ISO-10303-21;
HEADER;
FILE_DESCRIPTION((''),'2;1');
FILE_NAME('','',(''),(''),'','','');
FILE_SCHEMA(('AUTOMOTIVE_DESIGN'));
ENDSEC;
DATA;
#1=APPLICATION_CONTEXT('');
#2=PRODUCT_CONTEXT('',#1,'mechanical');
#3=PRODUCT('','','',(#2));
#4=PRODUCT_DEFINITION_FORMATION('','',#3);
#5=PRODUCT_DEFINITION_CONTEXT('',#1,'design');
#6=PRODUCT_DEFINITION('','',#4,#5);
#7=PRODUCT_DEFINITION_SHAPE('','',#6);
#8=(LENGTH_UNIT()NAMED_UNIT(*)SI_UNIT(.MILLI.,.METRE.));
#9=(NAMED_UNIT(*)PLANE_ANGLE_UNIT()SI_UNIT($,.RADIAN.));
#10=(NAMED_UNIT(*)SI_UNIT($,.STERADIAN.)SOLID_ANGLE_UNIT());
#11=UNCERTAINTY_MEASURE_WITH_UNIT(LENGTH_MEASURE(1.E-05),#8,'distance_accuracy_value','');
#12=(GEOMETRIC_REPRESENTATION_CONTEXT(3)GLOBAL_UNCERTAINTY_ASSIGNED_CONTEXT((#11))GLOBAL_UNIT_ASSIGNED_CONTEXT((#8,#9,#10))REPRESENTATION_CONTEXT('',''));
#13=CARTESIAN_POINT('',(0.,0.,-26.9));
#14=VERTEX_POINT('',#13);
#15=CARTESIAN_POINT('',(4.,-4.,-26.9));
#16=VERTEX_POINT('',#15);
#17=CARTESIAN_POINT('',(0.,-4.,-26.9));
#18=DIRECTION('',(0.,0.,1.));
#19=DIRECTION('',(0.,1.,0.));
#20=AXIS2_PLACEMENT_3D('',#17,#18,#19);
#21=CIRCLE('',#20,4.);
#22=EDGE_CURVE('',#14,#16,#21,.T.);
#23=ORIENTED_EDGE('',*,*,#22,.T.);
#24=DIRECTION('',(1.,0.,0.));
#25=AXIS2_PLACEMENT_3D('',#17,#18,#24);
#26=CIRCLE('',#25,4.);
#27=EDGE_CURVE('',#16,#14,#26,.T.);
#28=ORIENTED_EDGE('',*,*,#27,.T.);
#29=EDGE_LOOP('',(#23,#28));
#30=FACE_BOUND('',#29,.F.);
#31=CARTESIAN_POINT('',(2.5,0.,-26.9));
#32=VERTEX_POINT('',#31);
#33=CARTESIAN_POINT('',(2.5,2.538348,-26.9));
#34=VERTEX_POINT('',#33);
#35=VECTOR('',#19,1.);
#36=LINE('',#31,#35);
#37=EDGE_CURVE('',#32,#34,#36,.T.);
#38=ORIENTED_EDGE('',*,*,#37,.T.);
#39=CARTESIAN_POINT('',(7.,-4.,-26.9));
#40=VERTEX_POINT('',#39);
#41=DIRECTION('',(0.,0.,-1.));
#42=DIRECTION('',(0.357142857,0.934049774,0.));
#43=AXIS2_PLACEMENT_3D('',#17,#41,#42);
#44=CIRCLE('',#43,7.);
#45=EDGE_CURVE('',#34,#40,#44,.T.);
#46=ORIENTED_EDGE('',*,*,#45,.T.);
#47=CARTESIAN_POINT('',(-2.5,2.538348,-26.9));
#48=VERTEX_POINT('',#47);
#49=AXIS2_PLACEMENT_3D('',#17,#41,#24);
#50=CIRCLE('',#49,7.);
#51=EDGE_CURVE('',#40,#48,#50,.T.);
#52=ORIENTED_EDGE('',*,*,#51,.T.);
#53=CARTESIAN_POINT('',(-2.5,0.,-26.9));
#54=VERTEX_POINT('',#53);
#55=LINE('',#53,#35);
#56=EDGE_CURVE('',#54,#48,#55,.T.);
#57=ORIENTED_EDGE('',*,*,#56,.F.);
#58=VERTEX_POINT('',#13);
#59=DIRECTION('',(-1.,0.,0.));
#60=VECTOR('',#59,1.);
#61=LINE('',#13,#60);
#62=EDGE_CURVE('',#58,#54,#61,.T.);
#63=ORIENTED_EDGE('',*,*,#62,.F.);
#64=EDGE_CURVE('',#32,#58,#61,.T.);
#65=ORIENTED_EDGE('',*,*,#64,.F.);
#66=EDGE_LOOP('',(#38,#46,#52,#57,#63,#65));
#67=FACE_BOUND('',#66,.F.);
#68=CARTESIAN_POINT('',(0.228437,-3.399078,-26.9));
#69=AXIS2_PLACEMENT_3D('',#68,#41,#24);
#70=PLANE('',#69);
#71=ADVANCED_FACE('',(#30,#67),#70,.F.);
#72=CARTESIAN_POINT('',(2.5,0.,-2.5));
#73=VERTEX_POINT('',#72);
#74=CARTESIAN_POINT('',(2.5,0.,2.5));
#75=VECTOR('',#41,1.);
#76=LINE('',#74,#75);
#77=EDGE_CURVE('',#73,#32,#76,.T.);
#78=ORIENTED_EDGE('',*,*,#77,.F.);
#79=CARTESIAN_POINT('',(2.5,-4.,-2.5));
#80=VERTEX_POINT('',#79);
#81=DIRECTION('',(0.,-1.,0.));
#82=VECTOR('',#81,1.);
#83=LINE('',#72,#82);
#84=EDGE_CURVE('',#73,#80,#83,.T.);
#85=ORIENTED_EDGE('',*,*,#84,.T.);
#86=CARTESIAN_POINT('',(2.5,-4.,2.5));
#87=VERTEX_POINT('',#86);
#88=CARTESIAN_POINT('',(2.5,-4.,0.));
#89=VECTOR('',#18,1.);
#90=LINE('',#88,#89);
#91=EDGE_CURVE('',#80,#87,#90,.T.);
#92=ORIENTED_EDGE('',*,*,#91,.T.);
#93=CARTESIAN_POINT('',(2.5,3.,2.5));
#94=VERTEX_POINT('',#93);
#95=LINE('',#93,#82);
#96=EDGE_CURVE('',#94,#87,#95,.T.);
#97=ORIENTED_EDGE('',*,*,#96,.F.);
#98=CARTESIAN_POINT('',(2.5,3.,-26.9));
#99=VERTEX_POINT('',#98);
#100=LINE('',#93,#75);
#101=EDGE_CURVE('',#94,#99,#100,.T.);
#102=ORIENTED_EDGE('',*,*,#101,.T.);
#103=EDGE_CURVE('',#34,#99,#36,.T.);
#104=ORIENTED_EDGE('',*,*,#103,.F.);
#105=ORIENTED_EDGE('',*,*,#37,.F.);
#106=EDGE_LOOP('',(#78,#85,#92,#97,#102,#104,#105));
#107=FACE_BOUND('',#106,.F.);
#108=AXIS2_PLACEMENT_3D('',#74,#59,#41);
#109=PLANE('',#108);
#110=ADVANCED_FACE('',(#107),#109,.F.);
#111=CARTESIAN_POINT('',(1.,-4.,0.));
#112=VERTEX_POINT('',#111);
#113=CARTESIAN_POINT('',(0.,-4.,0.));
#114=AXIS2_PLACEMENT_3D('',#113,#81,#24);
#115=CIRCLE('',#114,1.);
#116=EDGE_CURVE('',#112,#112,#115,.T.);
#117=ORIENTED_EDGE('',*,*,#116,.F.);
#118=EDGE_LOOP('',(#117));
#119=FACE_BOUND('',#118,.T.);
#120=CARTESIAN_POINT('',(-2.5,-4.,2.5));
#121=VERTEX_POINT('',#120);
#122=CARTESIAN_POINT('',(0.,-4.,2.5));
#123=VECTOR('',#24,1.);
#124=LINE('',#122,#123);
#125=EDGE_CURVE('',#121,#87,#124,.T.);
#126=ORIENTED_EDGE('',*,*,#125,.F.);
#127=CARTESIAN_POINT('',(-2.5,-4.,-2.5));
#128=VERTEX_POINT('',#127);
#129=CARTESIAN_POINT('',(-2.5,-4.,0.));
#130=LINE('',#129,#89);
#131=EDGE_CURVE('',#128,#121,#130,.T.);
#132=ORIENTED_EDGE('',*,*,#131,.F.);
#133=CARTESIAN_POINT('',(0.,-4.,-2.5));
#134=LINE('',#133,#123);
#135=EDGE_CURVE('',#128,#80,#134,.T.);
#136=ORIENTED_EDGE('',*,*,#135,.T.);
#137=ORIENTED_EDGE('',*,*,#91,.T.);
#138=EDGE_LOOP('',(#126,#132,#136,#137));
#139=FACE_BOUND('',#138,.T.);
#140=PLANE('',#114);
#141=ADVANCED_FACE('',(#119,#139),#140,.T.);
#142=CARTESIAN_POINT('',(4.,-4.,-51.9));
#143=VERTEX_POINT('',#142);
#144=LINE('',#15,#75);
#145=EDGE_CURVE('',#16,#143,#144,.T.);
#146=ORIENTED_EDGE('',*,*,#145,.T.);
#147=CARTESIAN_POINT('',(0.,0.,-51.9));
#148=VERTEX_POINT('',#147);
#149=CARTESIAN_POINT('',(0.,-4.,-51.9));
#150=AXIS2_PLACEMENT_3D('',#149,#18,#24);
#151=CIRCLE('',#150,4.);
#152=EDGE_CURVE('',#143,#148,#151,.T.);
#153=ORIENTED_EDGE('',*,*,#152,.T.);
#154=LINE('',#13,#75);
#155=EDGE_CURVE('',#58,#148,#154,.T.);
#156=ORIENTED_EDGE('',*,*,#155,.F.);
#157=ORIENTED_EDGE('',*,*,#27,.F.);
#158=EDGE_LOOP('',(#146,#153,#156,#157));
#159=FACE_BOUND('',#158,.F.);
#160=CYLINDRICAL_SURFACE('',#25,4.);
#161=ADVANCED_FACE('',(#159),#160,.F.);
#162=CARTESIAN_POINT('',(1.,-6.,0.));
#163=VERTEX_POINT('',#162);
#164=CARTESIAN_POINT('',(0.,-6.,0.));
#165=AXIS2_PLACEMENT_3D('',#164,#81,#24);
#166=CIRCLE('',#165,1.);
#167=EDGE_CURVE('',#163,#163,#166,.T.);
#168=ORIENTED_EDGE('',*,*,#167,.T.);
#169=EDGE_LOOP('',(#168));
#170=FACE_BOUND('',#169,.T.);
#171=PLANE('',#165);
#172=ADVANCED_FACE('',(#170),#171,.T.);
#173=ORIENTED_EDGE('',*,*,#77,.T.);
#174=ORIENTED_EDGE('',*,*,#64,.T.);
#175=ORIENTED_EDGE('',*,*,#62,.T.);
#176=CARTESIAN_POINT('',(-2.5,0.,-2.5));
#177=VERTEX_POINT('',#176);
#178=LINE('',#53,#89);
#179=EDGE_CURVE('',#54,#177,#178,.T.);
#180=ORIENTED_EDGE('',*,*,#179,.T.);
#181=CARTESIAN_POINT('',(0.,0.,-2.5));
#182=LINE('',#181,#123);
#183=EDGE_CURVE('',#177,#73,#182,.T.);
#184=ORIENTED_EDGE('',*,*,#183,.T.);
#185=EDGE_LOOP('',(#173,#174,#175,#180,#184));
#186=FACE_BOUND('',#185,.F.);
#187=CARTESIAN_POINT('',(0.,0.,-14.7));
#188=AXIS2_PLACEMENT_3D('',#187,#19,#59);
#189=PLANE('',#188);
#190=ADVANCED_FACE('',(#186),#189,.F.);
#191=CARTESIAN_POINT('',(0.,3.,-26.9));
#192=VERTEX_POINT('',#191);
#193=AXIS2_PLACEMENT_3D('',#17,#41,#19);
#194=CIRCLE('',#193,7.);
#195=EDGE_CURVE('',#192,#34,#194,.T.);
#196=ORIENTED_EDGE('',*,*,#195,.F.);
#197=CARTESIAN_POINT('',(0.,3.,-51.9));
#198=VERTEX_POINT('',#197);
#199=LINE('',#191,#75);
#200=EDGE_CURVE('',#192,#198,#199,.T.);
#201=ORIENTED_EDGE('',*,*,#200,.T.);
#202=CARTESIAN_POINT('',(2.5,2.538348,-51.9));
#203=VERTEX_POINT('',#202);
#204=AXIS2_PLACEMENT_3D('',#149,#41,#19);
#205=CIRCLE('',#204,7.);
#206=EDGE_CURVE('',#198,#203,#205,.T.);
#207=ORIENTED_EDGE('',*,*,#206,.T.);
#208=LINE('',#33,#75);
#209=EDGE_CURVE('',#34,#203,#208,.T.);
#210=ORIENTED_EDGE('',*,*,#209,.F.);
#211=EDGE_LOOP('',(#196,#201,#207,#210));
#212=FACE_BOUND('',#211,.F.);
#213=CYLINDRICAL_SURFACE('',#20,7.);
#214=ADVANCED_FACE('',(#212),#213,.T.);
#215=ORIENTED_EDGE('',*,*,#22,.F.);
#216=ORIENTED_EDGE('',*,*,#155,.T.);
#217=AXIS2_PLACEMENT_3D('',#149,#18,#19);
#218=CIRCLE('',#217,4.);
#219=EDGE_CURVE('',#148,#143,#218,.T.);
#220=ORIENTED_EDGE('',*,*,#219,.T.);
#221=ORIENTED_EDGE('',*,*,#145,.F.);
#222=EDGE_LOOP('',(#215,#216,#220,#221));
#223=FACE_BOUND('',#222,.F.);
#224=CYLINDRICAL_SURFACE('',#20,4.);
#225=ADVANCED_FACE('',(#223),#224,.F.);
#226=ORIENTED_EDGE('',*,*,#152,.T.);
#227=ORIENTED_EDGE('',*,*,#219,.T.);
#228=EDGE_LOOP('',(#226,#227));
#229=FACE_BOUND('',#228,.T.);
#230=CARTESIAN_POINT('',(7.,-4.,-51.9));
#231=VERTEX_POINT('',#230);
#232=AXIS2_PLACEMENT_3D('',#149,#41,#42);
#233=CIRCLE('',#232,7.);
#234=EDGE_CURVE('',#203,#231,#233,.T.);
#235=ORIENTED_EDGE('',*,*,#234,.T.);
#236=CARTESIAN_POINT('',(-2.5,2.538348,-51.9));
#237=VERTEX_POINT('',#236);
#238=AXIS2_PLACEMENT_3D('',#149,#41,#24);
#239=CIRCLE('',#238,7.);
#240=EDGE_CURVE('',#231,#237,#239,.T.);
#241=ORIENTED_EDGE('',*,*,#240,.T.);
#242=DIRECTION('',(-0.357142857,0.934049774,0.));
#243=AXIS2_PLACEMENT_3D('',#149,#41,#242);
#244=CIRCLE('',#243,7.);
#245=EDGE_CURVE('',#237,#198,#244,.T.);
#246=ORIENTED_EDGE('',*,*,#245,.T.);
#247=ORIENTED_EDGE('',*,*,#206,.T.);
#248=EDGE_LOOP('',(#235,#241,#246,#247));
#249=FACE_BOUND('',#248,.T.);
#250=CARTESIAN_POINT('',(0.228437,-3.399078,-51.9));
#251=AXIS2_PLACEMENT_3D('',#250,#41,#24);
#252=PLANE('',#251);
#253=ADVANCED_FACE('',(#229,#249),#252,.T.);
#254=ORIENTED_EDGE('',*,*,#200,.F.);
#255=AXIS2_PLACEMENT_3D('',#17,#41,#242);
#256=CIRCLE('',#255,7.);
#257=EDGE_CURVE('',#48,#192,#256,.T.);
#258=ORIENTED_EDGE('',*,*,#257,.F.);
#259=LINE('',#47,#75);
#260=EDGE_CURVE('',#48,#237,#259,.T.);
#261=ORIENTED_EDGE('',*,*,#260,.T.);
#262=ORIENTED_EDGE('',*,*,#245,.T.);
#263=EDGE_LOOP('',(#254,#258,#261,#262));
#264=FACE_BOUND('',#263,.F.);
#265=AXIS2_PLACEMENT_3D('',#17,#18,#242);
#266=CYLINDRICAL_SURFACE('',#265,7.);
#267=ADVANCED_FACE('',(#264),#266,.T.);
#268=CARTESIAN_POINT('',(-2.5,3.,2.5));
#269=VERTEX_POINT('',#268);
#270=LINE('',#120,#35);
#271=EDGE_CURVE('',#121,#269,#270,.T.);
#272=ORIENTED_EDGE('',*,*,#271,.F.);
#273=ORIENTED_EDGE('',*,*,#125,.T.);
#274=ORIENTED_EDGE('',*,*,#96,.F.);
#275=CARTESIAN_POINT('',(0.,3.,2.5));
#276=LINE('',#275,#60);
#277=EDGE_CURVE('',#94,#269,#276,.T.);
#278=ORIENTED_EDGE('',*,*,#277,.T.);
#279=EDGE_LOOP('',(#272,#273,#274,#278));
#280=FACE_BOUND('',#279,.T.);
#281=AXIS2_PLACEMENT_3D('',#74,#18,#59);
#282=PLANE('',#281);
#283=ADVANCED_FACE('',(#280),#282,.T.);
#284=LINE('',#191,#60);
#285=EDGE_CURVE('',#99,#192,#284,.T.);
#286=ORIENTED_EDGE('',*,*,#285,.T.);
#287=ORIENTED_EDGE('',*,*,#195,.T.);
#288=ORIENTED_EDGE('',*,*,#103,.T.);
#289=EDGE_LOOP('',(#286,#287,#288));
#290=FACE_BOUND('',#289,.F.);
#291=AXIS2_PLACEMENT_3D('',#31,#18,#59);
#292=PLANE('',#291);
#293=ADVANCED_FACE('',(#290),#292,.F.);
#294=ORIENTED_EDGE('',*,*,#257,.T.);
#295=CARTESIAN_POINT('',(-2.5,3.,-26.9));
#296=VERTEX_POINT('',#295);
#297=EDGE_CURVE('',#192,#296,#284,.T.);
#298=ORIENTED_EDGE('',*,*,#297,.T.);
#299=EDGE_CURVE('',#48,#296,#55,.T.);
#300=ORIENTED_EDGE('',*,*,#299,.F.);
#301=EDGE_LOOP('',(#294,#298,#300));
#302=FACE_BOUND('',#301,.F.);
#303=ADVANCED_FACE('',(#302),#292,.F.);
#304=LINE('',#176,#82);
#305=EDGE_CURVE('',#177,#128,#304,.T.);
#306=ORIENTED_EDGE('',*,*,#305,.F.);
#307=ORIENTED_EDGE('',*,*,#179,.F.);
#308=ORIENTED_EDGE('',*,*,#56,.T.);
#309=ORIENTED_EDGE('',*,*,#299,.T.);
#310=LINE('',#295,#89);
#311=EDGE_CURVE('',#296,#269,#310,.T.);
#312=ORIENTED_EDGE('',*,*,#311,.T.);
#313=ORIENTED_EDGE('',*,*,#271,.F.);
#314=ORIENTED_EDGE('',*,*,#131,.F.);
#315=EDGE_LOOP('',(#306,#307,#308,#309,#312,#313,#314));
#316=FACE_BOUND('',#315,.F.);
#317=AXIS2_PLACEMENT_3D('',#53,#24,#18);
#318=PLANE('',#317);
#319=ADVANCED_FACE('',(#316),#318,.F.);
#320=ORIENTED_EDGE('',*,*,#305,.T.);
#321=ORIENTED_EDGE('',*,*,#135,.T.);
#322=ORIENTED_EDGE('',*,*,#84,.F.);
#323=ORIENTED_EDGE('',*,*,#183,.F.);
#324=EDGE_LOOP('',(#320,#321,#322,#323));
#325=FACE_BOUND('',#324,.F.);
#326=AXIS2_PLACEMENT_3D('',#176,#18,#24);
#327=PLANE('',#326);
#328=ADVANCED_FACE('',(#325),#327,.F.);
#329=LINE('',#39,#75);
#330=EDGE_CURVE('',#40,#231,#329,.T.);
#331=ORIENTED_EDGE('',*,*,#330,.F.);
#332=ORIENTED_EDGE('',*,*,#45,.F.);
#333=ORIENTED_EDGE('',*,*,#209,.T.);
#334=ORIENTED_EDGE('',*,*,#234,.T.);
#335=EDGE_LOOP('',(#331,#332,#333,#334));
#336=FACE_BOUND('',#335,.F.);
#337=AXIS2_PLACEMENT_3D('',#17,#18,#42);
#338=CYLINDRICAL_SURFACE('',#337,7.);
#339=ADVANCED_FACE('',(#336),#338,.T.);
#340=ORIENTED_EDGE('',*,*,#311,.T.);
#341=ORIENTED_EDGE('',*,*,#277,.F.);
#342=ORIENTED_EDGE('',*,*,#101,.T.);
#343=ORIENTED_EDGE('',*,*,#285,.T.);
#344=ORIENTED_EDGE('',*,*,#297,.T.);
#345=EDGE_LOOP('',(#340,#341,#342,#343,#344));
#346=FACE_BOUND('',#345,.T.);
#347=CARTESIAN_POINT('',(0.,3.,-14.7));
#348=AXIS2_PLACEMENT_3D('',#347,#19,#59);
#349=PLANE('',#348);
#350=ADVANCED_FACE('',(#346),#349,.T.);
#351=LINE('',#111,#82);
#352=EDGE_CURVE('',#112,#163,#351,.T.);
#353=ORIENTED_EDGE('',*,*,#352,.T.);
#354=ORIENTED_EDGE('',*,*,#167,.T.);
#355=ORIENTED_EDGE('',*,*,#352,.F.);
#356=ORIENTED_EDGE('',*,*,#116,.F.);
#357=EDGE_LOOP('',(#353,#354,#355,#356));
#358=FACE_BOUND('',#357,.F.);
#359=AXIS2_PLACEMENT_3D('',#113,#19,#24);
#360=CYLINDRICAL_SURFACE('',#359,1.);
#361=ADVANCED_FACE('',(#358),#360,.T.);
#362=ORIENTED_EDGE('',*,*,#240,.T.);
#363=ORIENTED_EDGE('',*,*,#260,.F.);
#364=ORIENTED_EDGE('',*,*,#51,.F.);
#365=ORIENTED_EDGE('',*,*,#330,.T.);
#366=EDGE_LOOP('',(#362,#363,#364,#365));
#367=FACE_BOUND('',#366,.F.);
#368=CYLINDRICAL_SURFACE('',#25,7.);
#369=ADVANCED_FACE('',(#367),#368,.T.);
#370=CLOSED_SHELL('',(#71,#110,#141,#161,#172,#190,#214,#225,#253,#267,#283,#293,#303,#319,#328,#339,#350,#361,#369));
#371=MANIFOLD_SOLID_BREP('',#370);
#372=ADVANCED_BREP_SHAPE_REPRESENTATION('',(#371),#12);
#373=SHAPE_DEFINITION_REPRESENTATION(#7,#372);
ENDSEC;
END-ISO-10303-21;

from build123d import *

# Parameters (mm, degrees)
F0_W     = 5
F0_H     = 5
F1_DEPTH = 4
F2_R     = 1
F3_DEPTH = 2
F4_W     = 5
F4_H     = 24.4
F4_H_2   = 5
F5_DEPTH = 3
F7_DEPTH = 25


with BuildPart() as f1:
    # F0 (on Front) → F1 (new body)
    with BuildSketch(Plane.XZ):
        Rectangle(F0_W, F0_H)
    extrude(amount=F1_DEPTH)

    # F2 (on face) → F3 (join)
    with BuildSketch(Plane.XZ.offset(4)):
        Circle(F2_R)
    extrude(amount=F3_DEPTH)

    # F4 (on face) → F5 (join)
    with BuildSketch(Plane(origin=(0, 0, 0), x_dir=(-1, 0, 0), z_dir=(0, 1, 0))):
        with Locations((0, -14.7)):
            Rectangle(F4_W, F4_H)
        Rectangle(F4_W, F4_H_2)
    extrude(amount=F5_DEPTH)

    # F6 (on face) → F7 (join)
    with BuildSketch(Plane(origin=(0, 0, -26.9), x_dir=(1, 0, 0), z_dir=(0, 0, -1))):
        with BuildLine():
            Line((-2.5, 0), (0, 0))
            Line((0, 0), (2.5, 0))
            Line((2.5, 0), (2.5, -2.5383484153))
            ThreePointArc((2.5, -2.5383484153), (5.7662812973, 0.0313730334), (7, 4))
            ThreePointArc((7, 4), (-3.9686269666, 9.7662812973), (-2.5, -2.5383484153))
            Line((-2.5, -2.5383484153), (-2.5, 0))
        make_face()
        with BuildLine():
            ThreePointArc((0, 0), (-2.8284271247, 6.8284271247), (4, 4))
            ThreePointArc((4, 4), (2.8284271247, 1.1715728753), (0, 0))
        make_face(mode=Mode.SUBTRACT)
        with BuildLine():
            Line((2.5, 0), (0, 0))
            Line((0, 0), (-2.5, 0))
            Line((-2.5, 0), (-2.5, -2.5383484153))
            ThreePointArc((-2.5, -2.5383484153), (-1.2711335675, -2.8836196477), (0, -3))
            ThreePointArc((0, -3), (1.2711335675, -2.8836196477), (2.5, -2.5383484153))
            Line((2.5, -2.5383484153), (2.5, 0))
        make_face()
    extrude(amount=F7_DEPTH)


solid = f1.part
